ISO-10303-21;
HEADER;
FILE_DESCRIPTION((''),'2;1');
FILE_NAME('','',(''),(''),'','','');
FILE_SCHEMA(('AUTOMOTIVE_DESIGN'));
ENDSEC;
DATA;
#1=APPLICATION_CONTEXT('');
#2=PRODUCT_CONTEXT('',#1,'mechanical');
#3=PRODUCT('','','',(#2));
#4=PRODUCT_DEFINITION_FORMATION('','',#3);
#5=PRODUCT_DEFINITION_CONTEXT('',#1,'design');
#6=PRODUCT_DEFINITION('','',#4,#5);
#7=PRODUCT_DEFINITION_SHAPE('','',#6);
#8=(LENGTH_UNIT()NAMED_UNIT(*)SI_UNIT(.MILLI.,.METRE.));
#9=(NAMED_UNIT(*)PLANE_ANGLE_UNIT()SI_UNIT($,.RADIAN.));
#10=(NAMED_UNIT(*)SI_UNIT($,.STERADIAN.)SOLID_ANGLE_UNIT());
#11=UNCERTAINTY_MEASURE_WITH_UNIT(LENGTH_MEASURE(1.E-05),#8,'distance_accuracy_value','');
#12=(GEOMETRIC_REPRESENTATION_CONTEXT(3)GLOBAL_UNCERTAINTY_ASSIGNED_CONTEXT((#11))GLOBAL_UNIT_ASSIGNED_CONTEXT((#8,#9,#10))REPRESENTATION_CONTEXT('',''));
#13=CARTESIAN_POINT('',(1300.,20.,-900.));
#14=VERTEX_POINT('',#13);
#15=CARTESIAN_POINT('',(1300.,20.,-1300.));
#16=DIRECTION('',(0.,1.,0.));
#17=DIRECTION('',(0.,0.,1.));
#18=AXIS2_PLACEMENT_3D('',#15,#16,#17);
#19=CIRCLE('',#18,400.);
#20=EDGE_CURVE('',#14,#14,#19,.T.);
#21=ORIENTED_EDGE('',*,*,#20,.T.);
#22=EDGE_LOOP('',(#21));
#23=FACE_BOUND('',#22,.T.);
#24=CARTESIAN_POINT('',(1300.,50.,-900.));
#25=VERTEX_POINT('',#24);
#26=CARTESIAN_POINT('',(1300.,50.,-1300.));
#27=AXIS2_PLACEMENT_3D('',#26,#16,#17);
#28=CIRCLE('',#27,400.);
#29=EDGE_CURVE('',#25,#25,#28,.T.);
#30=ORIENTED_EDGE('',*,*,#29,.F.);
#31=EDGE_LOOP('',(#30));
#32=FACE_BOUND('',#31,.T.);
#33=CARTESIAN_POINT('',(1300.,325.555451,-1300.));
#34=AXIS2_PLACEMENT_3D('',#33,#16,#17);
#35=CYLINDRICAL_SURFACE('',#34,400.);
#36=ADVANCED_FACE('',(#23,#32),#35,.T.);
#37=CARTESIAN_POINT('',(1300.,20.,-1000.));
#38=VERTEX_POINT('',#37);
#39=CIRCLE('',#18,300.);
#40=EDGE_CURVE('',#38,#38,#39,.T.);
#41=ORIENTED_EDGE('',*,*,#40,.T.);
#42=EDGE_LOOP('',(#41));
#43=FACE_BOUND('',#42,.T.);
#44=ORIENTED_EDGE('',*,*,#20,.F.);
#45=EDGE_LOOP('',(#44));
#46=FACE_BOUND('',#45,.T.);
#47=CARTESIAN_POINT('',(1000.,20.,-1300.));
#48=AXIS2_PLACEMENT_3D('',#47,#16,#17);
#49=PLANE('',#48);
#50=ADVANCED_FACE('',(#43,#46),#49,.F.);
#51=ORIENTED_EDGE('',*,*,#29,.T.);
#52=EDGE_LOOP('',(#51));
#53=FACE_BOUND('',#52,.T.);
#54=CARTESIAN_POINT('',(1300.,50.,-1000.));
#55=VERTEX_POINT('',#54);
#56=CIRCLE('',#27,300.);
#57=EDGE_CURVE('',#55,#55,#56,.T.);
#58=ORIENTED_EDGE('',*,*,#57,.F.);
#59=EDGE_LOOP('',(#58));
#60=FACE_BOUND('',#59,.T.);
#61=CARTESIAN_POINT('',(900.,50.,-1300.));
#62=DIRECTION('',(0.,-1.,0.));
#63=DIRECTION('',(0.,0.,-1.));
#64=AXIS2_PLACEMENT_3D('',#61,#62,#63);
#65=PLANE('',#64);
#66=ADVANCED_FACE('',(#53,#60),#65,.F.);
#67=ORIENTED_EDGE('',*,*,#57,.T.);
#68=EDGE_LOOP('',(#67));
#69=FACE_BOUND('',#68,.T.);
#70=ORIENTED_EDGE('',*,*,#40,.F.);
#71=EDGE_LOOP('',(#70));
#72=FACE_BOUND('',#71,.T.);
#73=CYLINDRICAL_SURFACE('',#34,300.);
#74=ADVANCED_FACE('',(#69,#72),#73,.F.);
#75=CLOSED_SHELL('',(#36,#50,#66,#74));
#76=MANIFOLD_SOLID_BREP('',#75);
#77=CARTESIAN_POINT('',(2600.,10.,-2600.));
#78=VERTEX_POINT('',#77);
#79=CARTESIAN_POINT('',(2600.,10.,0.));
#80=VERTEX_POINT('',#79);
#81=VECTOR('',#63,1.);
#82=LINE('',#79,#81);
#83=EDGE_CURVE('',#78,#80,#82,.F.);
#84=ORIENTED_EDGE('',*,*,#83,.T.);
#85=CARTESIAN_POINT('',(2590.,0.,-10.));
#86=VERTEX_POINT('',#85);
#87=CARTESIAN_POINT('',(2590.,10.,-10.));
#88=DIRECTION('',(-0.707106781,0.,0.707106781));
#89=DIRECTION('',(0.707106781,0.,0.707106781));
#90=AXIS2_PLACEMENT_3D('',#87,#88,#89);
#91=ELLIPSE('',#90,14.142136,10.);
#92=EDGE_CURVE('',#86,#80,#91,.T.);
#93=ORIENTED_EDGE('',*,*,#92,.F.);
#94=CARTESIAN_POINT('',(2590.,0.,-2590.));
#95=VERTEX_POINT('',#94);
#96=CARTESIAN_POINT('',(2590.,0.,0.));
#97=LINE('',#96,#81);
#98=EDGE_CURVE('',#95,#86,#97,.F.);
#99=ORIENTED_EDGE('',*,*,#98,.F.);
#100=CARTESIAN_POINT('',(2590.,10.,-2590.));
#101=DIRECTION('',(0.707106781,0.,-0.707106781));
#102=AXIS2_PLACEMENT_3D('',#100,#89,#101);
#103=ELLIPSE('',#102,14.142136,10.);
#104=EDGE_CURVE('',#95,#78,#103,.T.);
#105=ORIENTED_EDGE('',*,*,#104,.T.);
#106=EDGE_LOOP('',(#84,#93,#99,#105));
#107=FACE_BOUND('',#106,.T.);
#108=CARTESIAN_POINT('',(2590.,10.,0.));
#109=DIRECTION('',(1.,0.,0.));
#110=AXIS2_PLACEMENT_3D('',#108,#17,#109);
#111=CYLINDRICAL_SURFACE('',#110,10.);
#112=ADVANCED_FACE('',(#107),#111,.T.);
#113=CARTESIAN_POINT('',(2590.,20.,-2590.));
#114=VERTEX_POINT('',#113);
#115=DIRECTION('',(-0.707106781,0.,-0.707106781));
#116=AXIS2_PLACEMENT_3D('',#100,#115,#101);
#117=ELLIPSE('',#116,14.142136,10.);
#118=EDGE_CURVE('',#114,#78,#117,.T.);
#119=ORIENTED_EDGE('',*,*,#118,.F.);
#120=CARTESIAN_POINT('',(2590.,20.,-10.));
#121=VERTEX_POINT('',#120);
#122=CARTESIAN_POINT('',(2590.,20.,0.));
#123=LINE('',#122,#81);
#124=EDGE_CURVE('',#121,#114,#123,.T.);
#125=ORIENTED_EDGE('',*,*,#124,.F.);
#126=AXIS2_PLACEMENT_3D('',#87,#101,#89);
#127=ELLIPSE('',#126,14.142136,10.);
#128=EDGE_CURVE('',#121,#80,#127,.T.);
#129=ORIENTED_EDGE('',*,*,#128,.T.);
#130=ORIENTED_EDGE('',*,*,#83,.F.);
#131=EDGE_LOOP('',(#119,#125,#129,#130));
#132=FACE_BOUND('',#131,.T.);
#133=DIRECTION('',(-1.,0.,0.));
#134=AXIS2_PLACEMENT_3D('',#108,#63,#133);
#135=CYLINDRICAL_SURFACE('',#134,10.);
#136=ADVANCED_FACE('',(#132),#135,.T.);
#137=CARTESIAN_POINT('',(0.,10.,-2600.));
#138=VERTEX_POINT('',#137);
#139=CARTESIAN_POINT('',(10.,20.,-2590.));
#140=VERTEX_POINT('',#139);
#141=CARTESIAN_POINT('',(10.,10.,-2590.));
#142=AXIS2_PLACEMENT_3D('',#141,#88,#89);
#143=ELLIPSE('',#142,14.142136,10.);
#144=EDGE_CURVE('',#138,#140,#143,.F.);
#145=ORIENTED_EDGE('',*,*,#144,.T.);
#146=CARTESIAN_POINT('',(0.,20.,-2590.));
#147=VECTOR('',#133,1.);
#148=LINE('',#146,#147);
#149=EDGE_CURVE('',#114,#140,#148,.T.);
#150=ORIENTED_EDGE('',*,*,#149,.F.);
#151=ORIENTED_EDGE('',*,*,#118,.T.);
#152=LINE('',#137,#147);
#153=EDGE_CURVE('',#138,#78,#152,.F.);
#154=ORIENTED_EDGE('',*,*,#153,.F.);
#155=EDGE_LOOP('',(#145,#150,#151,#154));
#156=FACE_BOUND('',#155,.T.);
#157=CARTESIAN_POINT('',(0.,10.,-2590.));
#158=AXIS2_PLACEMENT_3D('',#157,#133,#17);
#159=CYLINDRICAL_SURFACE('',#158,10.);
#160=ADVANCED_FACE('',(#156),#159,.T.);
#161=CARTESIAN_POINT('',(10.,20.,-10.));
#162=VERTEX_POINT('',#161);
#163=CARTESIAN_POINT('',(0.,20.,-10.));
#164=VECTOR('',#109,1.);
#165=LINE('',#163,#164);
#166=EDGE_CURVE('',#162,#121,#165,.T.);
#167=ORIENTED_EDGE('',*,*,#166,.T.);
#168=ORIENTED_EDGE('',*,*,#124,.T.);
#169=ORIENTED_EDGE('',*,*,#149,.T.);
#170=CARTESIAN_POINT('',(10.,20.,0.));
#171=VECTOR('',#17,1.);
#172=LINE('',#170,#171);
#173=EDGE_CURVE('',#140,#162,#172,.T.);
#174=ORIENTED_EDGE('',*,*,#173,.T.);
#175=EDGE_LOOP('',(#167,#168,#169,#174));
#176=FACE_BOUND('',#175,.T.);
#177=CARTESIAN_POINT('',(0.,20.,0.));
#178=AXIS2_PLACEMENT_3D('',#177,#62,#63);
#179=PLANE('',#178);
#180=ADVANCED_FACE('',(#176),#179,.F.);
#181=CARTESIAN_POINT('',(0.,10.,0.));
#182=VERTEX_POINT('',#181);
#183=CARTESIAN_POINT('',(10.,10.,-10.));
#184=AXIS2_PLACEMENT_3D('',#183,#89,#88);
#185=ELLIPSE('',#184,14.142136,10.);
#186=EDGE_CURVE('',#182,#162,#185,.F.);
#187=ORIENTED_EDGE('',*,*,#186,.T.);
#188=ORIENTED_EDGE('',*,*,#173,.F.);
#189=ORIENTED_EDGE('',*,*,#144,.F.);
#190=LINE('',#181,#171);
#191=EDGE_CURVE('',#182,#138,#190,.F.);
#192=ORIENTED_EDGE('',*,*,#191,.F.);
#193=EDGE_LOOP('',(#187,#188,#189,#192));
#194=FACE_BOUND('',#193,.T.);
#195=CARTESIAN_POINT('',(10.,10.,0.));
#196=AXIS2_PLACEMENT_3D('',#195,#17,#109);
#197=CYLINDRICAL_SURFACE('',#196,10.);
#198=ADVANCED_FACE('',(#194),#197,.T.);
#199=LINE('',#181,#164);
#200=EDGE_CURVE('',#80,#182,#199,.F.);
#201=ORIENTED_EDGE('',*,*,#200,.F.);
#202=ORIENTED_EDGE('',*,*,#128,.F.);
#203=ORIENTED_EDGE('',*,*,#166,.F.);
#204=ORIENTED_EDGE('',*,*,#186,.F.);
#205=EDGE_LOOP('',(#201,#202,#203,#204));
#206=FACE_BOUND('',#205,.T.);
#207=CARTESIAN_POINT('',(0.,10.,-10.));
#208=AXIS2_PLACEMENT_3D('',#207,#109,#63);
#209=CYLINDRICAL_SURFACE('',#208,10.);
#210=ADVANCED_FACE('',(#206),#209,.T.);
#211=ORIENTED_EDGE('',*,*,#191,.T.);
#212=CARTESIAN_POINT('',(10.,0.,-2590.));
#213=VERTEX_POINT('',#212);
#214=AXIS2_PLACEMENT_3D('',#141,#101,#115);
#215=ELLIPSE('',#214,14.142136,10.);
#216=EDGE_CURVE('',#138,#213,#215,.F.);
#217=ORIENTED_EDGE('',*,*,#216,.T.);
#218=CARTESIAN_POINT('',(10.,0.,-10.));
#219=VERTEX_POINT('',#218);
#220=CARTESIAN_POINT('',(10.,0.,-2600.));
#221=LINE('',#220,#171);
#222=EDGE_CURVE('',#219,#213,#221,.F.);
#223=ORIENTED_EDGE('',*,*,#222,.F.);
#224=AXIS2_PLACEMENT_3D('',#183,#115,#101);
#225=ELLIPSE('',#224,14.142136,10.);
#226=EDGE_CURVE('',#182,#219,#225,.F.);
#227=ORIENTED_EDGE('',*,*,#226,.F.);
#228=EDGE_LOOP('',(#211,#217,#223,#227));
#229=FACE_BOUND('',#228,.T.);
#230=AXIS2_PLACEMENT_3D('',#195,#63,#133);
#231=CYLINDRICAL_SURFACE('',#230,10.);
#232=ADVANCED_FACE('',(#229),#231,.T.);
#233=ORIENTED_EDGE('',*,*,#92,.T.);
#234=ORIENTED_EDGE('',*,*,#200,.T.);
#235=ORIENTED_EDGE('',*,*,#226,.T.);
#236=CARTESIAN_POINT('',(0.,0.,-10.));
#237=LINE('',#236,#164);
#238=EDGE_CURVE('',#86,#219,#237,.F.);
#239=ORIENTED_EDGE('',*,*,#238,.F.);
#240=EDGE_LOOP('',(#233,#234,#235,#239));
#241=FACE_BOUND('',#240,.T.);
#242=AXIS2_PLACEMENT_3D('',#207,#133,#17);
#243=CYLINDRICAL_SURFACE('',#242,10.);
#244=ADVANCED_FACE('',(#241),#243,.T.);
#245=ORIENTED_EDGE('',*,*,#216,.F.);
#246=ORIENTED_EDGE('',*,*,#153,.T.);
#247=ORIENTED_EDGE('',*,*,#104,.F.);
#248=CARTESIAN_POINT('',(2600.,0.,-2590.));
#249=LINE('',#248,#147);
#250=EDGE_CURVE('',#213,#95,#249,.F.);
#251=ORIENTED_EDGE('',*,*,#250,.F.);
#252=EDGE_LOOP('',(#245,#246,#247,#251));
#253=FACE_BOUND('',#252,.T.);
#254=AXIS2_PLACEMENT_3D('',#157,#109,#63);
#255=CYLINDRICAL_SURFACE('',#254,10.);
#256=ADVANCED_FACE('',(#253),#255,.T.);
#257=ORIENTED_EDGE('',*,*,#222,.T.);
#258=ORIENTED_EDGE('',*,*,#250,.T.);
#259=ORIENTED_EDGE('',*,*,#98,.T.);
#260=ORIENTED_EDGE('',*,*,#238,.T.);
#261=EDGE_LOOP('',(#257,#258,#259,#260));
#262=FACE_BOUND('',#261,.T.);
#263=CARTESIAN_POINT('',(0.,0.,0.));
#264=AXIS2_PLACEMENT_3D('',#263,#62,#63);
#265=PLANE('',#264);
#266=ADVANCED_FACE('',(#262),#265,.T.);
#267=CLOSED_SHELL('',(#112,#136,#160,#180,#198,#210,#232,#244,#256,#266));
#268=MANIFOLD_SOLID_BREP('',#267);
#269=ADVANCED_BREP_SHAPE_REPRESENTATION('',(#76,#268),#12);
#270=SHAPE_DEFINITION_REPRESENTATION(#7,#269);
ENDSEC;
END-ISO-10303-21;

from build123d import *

# Parameters (mm, degrees)
SKETCH1_W           = 2600
SKETCH1_H           = 2600
BOSS_EXTRUDE1_DEPTH = 20
FILLET1_R           = 10
FILLET2_R           = 10
SKETCH6_W           = 100
SKETCH6_H           = 30


with BuildPart() as part:
    # Sketch1 → Boss-Extrude1 (new body)
    with BuildSketch(Plane(origin=(0, 0, 0), x_dir=(1, 0, 0), z_dir=(0, 1, 0))):
        with Locations((1300, 1300)):
            Rectangle(SKETCH1_W, SKETCH1_H)
    extrude(amount=BOSS_EXTRUDE1_DEPTH)

    # Fillet1
    fillet1_edges = [part.edges().sort_by_distance(p)[0] for p in [
        (2600, 20, -1300),
        (1300, 20, -2600),
        (0, 20, -1300),
        (1300, 20, 0),
    ]]
    fillet(fillet1_edges, radius=FILLET1_R)

    # Fillet2
    fillet2_edges = [part.edges().sort_by_distance(p)[0] for p in [
        (1300, 0, 0),
        (2600, 0, -1300),
        (1300, 0, -2600),
        (0, 0, -1300),
    ]]
    fillet(fillet2_edges, radius=FILLET2_R - 0.0001)  # a hair under: the kernel refuses the full size


with BuildPart() as body_2:
    # Sketch6 → Revolve1 (revolve)
    with BuildSketch(Plane(origin=(0, 0, -1300), x_dir=(-1, 0, 0), z_dir=(0, 0, -1)), mode=Mode.PRIVATE) as revolve1_sk:
        with Locations((-950, 35)):
            Rectangle(SKETCH6_W, SKETCH6_H)
    revolve(revolve1_sk.sketch.rotate(Axis((1300, 325.555450853, -1300), (0, -1, 0)), 270), axis=Axis((1300, 325.555450853, -1300), (0, -1, 0)))


solid = Compound([part.part, body_2.part])
